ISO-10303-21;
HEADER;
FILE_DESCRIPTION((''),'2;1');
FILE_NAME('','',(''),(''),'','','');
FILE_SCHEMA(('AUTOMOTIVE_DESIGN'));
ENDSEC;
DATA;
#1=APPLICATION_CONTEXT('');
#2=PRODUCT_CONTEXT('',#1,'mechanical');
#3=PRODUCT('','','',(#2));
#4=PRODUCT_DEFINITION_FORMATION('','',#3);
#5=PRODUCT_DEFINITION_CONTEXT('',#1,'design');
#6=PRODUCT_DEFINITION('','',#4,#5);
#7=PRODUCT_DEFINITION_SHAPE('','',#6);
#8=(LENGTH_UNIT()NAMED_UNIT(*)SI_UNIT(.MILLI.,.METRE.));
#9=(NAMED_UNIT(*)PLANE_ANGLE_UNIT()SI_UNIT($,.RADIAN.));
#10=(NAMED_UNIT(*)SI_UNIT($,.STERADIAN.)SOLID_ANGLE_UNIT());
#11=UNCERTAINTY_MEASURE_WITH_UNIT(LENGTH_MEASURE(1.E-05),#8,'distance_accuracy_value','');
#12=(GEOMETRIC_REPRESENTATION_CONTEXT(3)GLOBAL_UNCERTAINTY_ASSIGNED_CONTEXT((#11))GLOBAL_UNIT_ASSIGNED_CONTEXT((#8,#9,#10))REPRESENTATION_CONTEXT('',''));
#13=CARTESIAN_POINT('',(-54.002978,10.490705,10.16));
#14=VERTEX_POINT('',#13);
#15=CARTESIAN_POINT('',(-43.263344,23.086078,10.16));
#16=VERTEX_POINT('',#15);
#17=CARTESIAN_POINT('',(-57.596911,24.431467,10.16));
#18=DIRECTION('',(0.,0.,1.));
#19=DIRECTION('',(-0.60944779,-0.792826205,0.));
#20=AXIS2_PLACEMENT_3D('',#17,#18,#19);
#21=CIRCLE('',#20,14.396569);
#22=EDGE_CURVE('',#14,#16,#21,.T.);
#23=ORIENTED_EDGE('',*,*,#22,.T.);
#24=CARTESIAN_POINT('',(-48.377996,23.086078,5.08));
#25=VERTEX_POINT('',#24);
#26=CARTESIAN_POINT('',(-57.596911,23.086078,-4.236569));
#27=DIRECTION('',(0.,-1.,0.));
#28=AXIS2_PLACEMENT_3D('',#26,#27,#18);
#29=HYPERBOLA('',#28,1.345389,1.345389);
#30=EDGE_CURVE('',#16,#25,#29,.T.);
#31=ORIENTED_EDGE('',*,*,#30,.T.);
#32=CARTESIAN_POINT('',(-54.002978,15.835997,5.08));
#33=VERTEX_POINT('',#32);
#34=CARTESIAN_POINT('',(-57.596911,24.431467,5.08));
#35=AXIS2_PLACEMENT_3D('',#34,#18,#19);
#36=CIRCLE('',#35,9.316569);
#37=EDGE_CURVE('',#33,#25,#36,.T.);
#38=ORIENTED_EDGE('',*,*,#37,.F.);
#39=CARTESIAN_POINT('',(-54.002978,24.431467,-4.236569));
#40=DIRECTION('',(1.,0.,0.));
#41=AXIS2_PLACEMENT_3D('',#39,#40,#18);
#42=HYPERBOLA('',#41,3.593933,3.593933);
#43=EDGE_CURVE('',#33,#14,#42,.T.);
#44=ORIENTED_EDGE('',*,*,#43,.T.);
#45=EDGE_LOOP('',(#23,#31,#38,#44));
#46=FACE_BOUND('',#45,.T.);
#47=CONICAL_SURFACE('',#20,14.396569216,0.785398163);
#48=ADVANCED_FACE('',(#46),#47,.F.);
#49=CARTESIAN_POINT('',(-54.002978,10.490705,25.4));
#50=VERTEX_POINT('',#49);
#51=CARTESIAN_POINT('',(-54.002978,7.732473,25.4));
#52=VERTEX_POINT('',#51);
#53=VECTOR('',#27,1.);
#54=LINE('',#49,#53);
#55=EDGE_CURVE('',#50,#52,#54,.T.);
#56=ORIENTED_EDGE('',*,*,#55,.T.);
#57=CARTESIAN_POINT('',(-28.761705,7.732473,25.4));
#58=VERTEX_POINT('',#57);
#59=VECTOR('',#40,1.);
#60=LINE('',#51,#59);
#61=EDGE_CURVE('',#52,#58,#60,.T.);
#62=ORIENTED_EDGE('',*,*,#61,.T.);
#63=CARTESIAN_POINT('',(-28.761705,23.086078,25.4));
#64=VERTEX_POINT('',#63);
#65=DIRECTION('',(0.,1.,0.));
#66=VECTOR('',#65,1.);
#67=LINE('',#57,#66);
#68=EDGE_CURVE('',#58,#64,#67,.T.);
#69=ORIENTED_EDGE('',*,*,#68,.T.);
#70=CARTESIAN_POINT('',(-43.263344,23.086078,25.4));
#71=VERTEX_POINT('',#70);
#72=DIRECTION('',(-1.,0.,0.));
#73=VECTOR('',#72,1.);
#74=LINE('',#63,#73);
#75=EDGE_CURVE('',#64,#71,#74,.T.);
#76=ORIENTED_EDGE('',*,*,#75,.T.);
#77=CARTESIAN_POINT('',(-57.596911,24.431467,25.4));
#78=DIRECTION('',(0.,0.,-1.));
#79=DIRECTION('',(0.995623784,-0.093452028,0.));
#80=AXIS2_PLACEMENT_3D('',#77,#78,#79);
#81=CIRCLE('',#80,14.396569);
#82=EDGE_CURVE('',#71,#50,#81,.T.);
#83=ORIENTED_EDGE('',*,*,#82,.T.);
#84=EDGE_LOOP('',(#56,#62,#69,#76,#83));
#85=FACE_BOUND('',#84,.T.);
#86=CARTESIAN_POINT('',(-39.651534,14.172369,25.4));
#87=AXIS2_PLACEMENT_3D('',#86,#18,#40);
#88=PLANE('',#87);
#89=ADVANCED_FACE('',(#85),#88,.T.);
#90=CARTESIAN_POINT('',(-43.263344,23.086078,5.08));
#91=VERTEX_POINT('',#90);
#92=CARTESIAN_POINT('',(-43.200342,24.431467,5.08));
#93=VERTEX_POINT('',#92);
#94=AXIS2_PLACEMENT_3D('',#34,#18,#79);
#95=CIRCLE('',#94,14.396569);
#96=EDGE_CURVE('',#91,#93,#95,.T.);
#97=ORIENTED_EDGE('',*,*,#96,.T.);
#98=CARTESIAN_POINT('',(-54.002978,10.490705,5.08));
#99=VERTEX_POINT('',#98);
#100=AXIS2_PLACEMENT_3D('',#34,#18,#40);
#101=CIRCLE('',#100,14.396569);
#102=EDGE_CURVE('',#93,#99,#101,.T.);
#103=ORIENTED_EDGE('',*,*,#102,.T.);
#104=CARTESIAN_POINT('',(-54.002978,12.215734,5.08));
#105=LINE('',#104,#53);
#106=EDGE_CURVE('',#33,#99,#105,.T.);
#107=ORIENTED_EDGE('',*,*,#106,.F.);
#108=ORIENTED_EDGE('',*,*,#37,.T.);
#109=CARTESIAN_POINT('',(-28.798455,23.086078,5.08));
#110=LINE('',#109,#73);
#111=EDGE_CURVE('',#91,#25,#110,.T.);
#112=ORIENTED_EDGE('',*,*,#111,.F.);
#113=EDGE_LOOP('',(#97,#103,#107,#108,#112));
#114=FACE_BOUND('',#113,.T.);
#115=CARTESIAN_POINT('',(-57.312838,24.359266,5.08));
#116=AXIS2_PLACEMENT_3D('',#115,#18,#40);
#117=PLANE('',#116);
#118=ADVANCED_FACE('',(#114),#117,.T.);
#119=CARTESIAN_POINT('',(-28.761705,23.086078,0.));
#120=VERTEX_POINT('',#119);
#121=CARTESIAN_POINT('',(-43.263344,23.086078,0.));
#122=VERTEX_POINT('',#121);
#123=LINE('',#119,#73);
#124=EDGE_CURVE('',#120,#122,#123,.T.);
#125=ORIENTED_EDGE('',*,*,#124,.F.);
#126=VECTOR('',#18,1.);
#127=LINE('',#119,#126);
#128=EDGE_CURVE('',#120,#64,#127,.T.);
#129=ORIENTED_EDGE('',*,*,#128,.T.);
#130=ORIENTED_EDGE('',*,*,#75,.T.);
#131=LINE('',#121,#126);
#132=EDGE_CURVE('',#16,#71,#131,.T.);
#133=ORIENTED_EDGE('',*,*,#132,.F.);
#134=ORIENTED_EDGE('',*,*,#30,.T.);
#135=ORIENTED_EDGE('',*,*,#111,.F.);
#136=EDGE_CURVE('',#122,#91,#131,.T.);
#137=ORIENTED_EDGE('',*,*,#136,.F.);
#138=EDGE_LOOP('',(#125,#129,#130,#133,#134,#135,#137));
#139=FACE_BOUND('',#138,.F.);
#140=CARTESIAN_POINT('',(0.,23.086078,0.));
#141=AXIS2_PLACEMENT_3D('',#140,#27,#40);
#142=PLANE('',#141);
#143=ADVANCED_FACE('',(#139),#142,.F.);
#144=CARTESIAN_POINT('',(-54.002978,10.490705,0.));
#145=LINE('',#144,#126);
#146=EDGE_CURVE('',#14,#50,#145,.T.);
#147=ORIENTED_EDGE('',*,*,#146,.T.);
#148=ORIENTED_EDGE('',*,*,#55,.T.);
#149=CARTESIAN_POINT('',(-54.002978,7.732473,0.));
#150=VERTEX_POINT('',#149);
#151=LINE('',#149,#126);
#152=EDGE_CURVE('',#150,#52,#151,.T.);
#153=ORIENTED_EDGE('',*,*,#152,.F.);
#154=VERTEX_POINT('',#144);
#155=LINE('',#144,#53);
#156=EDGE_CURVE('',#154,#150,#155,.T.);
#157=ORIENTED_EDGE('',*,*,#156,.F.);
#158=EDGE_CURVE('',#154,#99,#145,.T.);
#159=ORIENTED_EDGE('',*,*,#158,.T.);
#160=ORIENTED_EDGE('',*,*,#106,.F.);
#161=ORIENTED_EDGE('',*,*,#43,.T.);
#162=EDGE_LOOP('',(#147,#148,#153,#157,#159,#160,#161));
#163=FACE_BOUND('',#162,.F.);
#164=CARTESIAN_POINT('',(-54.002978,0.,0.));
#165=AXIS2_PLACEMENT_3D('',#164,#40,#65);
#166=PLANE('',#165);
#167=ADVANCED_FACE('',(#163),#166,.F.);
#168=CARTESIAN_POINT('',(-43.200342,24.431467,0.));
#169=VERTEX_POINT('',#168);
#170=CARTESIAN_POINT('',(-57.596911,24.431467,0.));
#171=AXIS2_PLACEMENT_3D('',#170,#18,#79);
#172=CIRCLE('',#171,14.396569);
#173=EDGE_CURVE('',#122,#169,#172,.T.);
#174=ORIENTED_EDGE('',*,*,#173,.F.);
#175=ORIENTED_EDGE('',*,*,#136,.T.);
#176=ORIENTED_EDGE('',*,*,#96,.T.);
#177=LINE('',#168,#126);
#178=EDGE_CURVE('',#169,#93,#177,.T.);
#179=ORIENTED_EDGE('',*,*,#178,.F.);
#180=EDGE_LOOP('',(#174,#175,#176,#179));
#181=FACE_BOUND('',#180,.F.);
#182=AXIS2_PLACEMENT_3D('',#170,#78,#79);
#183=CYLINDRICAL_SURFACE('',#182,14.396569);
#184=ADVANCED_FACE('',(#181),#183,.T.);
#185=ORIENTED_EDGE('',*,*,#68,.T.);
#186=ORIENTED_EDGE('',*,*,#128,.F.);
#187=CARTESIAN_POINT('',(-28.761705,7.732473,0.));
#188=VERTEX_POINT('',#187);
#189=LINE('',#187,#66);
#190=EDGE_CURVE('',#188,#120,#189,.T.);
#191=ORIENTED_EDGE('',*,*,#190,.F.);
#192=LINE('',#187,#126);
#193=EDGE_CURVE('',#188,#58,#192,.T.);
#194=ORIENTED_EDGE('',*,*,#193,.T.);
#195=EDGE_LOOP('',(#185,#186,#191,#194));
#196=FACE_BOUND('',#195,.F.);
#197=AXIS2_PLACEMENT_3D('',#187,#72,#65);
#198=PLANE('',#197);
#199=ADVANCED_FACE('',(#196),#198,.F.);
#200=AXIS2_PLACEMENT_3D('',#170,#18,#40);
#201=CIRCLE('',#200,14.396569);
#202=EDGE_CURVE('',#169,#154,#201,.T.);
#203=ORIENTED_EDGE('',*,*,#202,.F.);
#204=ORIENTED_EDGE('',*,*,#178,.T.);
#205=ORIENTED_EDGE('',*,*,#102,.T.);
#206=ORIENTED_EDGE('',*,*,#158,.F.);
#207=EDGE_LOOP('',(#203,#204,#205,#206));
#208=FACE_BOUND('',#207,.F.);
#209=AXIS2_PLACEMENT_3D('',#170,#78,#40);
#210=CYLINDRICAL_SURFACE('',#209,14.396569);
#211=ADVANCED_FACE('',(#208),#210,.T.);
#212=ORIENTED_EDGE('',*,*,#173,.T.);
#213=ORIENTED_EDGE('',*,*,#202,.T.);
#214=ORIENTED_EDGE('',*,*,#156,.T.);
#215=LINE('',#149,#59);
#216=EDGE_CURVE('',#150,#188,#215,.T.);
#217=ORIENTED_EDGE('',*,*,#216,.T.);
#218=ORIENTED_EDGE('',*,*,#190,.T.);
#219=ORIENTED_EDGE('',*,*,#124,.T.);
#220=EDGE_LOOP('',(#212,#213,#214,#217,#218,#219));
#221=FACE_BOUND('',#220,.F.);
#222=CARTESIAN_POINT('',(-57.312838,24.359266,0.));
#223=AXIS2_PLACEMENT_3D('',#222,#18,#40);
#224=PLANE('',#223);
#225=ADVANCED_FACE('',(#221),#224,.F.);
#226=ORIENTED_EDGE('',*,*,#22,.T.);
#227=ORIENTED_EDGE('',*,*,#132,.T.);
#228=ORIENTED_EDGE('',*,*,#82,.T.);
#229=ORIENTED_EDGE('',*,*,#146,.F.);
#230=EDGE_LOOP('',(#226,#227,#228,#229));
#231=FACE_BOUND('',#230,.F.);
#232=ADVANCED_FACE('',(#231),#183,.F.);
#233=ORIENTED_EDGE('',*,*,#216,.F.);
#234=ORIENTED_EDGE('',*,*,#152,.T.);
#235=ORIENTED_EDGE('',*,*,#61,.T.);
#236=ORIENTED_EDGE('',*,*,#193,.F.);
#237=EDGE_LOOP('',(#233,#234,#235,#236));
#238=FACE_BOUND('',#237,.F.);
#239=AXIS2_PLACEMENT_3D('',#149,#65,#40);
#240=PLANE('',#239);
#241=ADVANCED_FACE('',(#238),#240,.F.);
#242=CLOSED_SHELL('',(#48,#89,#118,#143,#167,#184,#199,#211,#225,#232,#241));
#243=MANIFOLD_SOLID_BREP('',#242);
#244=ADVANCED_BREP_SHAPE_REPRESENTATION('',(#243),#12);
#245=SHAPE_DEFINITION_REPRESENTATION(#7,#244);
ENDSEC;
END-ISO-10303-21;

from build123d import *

# Parameters (mm, degrees)
F1_DEPTH    = 25.4
F2_DEPTH    = 5.08
F3_T4_ANGLE = 174.1930400009


# Not quite as in the source:
# - a fillet or chamfer that OpenCascade refuses, or shapes differently, is made with other operations: its cross-section is extruded or revolved along the edge and cut away or added


with BuildPart() as f1:
    # F0 (on Top) → F1 (new body)
    with BuildSketch(Plane.XY):
        with BuildLine():
            Line((-28.7617053837, 23.086078465), (-43.2633440317, 23.086078465))
            ThreePointArc((-43.2633440317, 23.086078465), (-46.6420182582, 15.0906140017), (-54.0029779077, 10.4907048123))
            Line((-54.0029779077, 10.4907048123), (-54.0029779077, 7.7324733138))
            Line((-54.0029779077, 7.7324733138), (-28.7617053837, 7.7324733138))
            Line((-28.7617053837, 7.7324733138), (-28.7617053837, 23.086078465))
        make_face()
    extrude(amount=F1_DEPTH)

    # F0 (on Top) → F2 (join)
    with BuildSketch(Plane.XY):
        with BuildLine():
            Line((-54.0029779077, 10.4907048123), (-54.0029779077, 23.086078465))
            Line((-54.0029779077, 23.086078465), (-43.2633440317, 23.086078465))
            ThreePointArc((-43.2633440317, 23.086078465), (-43.2161007803, 23.7580355867), (-43.2003415292, 24.4314670563))
            ThreePointArc((-43.2003415292, 24.4314670563), (-68.9767505511, 33.249655712), (-54.0029779077, 10.4907048123))
        make_face()
        with BuildLine():
            Line((-43.2633440317, 23.086078465), (-54.0029779077, 23.086078465))
            Line((-54.0029779077, 23.086078465), (-54.0029779077, 10.4907048123))
            ThreePointArc((-54.0029779077, 10.4907048123), (-46.6420182582, 15.0906140017), (-43.2633440317, 23.086078465))
        make_face()
    extrude(amount=F2_DEPTH)

    # F3: chamfer of 5.08 on 1 edges, made by hand


with BuildPart() as f3_tool2:
    # F3_s3 → F3_t4 (revolve)
    with BuildSketch(Plane(origin=(-48.0088326829, 36.9045281739, 0), x_dir=(0, 0, 1), z_dir=(-0.7928262046, 0.6094477905, 0))):
        Polygon((10.16, -30.128971911), (5.08, -25.048971911), (5.08, -30.128971911), align=None)
    revolve(axis=Axis((-57.5969107449, 24.4314670563, 5.08), (0, 0, 1)), revolution_arc=F3_T4_ANGLE)

    split(bisect_by=Plane.XZ.offset(-23.086078465), keep=Keep.TOP)

    split(bisect_by=Plane.YZ.offset(-54.0029779077), keep=Keep.TOP)


with BuildPart() as f1_1:
    add(f1.part)

    # F3_t1: union F3_tool2
    add(f3_tool2.part)


solid = f1_1.part
